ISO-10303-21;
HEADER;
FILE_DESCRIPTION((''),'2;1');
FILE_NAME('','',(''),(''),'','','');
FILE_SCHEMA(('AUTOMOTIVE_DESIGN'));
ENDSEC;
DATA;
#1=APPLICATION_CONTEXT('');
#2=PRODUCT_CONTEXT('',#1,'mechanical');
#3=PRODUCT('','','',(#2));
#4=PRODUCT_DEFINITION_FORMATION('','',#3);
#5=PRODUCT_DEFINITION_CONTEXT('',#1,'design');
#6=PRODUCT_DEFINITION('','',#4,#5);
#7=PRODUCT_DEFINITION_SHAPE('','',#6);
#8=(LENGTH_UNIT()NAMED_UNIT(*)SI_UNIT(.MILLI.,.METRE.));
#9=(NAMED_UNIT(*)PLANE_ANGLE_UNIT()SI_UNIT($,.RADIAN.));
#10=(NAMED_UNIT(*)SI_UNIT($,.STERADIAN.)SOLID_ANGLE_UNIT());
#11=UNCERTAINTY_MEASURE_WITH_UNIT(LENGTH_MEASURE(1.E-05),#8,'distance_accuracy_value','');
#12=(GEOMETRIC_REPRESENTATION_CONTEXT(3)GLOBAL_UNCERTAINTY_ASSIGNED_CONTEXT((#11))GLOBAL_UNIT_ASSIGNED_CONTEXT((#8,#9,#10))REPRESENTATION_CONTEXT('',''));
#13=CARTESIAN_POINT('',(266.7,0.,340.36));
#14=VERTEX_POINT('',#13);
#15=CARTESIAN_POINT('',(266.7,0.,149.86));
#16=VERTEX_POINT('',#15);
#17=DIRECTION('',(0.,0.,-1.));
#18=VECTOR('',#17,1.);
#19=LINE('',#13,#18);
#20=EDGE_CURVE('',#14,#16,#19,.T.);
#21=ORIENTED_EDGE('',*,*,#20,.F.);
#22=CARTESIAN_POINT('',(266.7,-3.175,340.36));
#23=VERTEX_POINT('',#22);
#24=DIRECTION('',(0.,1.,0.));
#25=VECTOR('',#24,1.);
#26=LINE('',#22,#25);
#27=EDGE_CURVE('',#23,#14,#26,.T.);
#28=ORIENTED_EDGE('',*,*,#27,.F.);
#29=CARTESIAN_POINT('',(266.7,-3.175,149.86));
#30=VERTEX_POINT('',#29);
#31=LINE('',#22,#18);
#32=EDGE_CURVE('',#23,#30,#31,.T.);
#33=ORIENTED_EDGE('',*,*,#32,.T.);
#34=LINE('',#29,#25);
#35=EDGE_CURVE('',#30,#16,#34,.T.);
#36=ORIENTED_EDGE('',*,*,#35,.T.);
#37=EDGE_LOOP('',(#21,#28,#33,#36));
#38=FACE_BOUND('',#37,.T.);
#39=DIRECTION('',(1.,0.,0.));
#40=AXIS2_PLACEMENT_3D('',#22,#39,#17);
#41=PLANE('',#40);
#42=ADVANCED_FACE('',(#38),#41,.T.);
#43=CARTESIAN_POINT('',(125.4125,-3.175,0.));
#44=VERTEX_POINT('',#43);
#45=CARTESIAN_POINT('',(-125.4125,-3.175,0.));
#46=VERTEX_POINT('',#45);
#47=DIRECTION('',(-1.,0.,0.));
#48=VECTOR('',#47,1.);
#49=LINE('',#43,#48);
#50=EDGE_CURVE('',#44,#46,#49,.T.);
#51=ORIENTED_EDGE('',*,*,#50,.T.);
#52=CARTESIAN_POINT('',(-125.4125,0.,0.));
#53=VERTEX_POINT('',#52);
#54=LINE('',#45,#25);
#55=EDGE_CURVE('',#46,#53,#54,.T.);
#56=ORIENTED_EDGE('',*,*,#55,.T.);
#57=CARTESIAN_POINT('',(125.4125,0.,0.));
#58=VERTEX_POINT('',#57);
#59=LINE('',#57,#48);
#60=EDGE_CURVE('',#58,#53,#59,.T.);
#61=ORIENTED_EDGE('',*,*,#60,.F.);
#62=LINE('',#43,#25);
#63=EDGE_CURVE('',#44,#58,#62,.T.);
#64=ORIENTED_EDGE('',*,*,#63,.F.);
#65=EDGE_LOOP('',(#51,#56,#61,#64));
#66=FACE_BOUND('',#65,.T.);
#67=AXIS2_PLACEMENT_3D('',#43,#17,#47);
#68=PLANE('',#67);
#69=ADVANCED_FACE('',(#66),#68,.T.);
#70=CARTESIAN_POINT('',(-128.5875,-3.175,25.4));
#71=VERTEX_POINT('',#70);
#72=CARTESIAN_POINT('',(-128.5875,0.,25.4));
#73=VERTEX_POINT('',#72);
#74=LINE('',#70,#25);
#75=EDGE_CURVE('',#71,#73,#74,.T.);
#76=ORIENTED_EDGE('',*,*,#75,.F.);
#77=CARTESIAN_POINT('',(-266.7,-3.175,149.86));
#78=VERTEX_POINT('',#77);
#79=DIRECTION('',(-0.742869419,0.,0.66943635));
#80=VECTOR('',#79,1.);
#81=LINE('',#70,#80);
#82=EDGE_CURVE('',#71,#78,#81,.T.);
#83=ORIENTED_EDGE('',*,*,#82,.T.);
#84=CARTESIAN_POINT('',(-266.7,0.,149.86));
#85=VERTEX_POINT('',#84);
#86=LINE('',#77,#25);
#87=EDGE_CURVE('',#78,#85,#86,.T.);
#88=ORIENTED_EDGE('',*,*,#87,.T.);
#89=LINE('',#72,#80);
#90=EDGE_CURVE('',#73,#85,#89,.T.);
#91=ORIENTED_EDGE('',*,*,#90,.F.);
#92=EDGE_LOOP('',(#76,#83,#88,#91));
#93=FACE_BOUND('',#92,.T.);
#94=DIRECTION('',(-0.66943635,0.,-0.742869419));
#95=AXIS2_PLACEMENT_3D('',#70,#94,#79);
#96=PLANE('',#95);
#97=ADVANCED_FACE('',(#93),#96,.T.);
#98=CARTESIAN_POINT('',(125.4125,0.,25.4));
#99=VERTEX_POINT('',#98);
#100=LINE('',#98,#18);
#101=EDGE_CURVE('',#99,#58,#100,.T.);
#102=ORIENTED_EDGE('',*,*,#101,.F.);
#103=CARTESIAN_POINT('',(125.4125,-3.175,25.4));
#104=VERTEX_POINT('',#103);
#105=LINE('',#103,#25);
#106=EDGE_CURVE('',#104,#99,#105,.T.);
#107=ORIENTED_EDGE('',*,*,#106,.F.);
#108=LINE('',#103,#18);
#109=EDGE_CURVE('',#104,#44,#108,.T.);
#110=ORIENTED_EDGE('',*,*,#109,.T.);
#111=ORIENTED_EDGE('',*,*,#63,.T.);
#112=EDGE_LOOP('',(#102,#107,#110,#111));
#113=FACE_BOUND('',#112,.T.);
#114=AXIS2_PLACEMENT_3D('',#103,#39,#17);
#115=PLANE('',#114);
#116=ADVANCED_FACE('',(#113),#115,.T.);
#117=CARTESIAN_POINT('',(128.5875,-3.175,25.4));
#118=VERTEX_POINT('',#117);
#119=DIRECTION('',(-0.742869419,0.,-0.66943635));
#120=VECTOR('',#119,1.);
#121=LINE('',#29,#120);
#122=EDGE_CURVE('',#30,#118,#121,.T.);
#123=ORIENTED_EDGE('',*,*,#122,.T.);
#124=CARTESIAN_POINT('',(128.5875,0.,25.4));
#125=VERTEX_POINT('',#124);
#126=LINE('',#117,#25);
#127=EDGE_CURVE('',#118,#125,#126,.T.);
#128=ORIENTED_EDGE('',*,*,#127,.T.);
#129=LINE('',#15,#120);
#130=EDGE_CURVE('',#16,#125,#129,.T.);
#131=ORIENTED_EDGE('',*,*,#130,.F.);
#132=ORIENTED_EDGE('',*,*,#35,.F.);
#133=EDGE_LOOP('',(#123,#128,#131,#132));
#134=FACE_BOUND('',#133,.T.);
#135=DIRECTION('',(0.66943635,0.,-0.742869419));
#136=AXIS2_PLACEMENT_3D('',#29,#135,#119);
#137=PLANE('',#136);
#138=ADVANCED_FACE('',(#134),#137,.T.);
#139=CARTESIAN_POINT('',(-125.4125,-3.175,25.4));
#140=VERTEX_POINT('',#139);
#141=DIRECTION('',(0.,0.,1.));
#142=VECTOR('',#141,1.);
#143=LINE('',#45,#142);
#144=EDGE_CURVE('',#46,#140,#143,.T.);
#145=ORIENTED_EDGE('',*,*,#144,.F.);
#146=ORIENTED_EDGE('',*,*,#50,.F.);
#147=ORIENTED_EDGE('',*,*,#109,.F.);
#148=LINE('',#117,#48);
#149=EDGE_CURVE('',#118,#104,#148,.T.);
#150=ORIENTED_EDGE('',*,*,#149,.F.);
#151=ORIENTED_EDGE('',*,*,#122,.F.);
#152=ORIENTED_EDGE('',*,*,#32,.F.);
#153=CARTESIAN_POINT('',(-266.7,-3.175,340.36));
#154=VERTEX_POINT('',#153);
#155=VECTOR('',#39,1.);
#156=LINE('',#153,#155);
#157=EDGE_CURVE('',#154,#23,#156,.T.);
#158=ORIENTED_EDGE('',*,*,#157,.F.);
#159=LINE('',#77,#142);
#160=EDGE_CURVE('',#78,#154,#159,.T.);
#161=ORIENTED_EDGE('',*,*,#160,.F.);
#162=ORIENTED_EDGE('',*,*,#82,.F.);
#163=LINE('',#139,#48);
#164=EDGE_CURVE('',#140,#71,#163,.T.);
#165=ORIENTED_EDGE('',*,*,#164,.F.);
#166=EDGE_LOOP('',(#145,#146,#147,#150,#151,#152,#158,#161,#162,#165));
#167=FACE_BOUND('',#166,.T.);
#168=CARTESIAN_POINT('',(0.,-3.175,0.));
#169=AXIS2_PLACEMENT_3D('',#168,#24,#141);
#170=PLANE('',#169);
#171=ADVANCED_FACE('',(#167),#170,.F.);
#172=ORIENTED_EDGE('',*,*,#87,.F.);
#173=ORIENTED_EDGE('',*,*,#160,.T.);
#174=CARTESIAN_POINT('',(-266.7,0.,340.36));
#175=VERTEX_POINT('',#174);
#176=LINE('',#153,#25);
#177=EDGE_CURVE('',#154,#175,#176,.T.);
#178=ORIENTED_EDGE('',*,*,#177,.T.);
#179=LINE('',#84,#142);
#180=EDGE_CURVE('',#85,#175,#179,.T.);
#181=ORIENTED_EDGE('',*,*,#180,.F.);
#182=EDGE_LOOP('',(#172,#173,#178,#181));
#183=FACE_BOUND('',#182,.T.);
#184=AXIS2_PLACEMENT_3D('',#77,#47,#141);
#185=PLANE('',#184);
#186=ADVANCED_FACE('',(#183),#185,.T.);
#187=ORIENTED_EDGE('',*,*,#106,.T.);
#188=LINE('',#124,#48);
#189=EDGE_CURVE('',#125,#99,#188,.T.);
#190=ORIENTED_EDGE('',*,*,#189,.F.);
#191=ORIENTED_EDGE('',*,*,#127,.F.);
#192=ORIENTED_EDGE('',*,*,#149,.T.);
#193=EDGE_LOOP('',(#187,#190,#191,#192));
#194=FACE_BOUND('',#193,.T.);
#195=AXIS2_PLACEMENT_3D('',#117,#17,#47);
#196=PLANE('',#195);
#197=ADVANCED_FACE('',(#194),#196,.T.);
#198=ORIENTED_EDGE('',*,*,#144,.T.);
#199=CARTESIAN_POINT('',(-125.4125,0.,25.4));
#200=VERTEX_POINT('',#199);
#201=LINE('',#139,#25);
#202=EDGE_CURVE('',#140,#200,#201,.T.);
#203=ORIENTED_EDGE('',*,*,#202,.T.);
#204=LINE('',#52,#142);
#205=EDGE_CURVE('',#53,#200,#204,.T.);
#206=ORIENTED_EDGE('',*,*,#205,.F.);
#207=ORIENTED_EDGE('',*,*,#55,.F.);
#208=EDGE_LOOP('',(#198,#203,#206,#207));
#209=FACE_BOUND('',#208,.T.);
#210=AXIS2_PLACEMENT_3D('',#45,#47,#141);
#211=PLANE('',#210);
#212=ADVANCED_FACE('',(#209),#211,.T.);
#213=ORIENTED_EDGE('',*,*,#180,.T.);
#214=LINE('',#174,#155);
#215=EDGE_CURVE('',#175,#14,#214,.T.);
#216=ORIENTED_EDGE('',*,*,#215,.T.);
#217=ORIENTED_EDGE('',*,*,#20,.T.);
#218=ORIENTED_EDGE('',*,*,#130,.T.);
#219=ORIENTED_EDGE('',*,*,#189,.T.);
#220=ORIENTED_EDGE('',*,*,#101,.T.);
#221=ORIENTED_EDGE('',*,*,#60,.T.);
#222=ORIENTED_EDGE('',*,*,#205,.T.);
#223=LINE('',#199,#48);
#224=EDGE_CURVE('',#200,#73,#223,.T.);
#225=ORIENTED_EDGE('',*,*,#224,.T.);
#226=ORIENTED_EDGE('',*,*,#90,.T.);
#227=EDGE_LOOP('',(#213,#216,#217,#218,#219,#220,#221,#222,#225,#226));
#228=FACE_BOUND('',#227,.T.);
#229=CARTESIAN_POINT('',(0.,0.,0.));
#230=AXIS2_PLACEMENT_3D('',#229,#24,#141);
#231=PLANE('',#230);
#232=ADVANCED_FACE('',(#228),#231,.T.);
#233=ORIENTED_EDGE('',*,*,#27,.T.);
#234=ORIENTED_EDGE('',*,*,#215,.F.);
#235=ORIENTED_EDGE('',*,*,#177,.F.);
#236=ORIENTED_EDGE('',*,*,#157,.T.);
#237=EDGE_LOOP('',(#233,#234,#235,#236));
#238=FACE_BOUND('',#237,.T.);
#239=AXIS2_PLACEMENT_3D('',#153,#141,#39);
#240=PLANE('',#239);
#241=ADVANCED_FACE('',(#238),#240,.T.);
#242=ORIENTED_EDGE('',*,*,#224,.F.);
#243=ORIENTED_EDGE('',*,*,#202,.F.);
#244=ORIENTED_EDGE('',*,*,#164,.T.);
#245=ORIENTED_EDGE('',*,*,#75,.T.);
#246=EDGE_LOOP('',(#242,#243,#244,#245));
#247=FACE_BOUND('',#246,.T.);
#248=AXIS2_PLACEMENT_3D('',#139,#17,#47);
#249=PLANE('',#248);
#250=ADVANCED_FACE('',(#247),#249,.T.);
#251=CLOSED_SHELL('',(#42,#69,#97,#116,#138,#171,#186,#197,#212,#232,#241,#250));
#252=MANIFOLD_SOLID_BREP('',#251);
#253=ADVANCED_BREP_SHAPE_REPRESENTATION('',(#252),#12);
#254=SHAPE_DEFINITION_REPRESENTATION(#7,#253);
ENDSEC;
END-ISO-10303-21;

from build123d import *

# Parameters (mm, degrees)
BASE_FLANGE1_DEPTH = 3.175


# Sheet-metal steps are written as plain solids
with BuildPart() as part:
    # Sketch1 → Base-Flange1 (new body)
    with BuildSketch(Plane(origin=(0, 0, 0), x_dir=(1, 0, 0), z_dir=(0, 1, 0))):
        Polygon((125.4125, 0), (-125.4125, 0), (-125.4125, -25.4), (-128.5875, -25.4), (-266.7, -149.86), (-266.7, -340.36), (266.7, -340.36), (266.7, -149.86), (128.5875, -25.4), (125.4125, -25.4), align=None)
    extrude(amount=-BASE_FLANGE1_DEPTH)


solid = part.part
